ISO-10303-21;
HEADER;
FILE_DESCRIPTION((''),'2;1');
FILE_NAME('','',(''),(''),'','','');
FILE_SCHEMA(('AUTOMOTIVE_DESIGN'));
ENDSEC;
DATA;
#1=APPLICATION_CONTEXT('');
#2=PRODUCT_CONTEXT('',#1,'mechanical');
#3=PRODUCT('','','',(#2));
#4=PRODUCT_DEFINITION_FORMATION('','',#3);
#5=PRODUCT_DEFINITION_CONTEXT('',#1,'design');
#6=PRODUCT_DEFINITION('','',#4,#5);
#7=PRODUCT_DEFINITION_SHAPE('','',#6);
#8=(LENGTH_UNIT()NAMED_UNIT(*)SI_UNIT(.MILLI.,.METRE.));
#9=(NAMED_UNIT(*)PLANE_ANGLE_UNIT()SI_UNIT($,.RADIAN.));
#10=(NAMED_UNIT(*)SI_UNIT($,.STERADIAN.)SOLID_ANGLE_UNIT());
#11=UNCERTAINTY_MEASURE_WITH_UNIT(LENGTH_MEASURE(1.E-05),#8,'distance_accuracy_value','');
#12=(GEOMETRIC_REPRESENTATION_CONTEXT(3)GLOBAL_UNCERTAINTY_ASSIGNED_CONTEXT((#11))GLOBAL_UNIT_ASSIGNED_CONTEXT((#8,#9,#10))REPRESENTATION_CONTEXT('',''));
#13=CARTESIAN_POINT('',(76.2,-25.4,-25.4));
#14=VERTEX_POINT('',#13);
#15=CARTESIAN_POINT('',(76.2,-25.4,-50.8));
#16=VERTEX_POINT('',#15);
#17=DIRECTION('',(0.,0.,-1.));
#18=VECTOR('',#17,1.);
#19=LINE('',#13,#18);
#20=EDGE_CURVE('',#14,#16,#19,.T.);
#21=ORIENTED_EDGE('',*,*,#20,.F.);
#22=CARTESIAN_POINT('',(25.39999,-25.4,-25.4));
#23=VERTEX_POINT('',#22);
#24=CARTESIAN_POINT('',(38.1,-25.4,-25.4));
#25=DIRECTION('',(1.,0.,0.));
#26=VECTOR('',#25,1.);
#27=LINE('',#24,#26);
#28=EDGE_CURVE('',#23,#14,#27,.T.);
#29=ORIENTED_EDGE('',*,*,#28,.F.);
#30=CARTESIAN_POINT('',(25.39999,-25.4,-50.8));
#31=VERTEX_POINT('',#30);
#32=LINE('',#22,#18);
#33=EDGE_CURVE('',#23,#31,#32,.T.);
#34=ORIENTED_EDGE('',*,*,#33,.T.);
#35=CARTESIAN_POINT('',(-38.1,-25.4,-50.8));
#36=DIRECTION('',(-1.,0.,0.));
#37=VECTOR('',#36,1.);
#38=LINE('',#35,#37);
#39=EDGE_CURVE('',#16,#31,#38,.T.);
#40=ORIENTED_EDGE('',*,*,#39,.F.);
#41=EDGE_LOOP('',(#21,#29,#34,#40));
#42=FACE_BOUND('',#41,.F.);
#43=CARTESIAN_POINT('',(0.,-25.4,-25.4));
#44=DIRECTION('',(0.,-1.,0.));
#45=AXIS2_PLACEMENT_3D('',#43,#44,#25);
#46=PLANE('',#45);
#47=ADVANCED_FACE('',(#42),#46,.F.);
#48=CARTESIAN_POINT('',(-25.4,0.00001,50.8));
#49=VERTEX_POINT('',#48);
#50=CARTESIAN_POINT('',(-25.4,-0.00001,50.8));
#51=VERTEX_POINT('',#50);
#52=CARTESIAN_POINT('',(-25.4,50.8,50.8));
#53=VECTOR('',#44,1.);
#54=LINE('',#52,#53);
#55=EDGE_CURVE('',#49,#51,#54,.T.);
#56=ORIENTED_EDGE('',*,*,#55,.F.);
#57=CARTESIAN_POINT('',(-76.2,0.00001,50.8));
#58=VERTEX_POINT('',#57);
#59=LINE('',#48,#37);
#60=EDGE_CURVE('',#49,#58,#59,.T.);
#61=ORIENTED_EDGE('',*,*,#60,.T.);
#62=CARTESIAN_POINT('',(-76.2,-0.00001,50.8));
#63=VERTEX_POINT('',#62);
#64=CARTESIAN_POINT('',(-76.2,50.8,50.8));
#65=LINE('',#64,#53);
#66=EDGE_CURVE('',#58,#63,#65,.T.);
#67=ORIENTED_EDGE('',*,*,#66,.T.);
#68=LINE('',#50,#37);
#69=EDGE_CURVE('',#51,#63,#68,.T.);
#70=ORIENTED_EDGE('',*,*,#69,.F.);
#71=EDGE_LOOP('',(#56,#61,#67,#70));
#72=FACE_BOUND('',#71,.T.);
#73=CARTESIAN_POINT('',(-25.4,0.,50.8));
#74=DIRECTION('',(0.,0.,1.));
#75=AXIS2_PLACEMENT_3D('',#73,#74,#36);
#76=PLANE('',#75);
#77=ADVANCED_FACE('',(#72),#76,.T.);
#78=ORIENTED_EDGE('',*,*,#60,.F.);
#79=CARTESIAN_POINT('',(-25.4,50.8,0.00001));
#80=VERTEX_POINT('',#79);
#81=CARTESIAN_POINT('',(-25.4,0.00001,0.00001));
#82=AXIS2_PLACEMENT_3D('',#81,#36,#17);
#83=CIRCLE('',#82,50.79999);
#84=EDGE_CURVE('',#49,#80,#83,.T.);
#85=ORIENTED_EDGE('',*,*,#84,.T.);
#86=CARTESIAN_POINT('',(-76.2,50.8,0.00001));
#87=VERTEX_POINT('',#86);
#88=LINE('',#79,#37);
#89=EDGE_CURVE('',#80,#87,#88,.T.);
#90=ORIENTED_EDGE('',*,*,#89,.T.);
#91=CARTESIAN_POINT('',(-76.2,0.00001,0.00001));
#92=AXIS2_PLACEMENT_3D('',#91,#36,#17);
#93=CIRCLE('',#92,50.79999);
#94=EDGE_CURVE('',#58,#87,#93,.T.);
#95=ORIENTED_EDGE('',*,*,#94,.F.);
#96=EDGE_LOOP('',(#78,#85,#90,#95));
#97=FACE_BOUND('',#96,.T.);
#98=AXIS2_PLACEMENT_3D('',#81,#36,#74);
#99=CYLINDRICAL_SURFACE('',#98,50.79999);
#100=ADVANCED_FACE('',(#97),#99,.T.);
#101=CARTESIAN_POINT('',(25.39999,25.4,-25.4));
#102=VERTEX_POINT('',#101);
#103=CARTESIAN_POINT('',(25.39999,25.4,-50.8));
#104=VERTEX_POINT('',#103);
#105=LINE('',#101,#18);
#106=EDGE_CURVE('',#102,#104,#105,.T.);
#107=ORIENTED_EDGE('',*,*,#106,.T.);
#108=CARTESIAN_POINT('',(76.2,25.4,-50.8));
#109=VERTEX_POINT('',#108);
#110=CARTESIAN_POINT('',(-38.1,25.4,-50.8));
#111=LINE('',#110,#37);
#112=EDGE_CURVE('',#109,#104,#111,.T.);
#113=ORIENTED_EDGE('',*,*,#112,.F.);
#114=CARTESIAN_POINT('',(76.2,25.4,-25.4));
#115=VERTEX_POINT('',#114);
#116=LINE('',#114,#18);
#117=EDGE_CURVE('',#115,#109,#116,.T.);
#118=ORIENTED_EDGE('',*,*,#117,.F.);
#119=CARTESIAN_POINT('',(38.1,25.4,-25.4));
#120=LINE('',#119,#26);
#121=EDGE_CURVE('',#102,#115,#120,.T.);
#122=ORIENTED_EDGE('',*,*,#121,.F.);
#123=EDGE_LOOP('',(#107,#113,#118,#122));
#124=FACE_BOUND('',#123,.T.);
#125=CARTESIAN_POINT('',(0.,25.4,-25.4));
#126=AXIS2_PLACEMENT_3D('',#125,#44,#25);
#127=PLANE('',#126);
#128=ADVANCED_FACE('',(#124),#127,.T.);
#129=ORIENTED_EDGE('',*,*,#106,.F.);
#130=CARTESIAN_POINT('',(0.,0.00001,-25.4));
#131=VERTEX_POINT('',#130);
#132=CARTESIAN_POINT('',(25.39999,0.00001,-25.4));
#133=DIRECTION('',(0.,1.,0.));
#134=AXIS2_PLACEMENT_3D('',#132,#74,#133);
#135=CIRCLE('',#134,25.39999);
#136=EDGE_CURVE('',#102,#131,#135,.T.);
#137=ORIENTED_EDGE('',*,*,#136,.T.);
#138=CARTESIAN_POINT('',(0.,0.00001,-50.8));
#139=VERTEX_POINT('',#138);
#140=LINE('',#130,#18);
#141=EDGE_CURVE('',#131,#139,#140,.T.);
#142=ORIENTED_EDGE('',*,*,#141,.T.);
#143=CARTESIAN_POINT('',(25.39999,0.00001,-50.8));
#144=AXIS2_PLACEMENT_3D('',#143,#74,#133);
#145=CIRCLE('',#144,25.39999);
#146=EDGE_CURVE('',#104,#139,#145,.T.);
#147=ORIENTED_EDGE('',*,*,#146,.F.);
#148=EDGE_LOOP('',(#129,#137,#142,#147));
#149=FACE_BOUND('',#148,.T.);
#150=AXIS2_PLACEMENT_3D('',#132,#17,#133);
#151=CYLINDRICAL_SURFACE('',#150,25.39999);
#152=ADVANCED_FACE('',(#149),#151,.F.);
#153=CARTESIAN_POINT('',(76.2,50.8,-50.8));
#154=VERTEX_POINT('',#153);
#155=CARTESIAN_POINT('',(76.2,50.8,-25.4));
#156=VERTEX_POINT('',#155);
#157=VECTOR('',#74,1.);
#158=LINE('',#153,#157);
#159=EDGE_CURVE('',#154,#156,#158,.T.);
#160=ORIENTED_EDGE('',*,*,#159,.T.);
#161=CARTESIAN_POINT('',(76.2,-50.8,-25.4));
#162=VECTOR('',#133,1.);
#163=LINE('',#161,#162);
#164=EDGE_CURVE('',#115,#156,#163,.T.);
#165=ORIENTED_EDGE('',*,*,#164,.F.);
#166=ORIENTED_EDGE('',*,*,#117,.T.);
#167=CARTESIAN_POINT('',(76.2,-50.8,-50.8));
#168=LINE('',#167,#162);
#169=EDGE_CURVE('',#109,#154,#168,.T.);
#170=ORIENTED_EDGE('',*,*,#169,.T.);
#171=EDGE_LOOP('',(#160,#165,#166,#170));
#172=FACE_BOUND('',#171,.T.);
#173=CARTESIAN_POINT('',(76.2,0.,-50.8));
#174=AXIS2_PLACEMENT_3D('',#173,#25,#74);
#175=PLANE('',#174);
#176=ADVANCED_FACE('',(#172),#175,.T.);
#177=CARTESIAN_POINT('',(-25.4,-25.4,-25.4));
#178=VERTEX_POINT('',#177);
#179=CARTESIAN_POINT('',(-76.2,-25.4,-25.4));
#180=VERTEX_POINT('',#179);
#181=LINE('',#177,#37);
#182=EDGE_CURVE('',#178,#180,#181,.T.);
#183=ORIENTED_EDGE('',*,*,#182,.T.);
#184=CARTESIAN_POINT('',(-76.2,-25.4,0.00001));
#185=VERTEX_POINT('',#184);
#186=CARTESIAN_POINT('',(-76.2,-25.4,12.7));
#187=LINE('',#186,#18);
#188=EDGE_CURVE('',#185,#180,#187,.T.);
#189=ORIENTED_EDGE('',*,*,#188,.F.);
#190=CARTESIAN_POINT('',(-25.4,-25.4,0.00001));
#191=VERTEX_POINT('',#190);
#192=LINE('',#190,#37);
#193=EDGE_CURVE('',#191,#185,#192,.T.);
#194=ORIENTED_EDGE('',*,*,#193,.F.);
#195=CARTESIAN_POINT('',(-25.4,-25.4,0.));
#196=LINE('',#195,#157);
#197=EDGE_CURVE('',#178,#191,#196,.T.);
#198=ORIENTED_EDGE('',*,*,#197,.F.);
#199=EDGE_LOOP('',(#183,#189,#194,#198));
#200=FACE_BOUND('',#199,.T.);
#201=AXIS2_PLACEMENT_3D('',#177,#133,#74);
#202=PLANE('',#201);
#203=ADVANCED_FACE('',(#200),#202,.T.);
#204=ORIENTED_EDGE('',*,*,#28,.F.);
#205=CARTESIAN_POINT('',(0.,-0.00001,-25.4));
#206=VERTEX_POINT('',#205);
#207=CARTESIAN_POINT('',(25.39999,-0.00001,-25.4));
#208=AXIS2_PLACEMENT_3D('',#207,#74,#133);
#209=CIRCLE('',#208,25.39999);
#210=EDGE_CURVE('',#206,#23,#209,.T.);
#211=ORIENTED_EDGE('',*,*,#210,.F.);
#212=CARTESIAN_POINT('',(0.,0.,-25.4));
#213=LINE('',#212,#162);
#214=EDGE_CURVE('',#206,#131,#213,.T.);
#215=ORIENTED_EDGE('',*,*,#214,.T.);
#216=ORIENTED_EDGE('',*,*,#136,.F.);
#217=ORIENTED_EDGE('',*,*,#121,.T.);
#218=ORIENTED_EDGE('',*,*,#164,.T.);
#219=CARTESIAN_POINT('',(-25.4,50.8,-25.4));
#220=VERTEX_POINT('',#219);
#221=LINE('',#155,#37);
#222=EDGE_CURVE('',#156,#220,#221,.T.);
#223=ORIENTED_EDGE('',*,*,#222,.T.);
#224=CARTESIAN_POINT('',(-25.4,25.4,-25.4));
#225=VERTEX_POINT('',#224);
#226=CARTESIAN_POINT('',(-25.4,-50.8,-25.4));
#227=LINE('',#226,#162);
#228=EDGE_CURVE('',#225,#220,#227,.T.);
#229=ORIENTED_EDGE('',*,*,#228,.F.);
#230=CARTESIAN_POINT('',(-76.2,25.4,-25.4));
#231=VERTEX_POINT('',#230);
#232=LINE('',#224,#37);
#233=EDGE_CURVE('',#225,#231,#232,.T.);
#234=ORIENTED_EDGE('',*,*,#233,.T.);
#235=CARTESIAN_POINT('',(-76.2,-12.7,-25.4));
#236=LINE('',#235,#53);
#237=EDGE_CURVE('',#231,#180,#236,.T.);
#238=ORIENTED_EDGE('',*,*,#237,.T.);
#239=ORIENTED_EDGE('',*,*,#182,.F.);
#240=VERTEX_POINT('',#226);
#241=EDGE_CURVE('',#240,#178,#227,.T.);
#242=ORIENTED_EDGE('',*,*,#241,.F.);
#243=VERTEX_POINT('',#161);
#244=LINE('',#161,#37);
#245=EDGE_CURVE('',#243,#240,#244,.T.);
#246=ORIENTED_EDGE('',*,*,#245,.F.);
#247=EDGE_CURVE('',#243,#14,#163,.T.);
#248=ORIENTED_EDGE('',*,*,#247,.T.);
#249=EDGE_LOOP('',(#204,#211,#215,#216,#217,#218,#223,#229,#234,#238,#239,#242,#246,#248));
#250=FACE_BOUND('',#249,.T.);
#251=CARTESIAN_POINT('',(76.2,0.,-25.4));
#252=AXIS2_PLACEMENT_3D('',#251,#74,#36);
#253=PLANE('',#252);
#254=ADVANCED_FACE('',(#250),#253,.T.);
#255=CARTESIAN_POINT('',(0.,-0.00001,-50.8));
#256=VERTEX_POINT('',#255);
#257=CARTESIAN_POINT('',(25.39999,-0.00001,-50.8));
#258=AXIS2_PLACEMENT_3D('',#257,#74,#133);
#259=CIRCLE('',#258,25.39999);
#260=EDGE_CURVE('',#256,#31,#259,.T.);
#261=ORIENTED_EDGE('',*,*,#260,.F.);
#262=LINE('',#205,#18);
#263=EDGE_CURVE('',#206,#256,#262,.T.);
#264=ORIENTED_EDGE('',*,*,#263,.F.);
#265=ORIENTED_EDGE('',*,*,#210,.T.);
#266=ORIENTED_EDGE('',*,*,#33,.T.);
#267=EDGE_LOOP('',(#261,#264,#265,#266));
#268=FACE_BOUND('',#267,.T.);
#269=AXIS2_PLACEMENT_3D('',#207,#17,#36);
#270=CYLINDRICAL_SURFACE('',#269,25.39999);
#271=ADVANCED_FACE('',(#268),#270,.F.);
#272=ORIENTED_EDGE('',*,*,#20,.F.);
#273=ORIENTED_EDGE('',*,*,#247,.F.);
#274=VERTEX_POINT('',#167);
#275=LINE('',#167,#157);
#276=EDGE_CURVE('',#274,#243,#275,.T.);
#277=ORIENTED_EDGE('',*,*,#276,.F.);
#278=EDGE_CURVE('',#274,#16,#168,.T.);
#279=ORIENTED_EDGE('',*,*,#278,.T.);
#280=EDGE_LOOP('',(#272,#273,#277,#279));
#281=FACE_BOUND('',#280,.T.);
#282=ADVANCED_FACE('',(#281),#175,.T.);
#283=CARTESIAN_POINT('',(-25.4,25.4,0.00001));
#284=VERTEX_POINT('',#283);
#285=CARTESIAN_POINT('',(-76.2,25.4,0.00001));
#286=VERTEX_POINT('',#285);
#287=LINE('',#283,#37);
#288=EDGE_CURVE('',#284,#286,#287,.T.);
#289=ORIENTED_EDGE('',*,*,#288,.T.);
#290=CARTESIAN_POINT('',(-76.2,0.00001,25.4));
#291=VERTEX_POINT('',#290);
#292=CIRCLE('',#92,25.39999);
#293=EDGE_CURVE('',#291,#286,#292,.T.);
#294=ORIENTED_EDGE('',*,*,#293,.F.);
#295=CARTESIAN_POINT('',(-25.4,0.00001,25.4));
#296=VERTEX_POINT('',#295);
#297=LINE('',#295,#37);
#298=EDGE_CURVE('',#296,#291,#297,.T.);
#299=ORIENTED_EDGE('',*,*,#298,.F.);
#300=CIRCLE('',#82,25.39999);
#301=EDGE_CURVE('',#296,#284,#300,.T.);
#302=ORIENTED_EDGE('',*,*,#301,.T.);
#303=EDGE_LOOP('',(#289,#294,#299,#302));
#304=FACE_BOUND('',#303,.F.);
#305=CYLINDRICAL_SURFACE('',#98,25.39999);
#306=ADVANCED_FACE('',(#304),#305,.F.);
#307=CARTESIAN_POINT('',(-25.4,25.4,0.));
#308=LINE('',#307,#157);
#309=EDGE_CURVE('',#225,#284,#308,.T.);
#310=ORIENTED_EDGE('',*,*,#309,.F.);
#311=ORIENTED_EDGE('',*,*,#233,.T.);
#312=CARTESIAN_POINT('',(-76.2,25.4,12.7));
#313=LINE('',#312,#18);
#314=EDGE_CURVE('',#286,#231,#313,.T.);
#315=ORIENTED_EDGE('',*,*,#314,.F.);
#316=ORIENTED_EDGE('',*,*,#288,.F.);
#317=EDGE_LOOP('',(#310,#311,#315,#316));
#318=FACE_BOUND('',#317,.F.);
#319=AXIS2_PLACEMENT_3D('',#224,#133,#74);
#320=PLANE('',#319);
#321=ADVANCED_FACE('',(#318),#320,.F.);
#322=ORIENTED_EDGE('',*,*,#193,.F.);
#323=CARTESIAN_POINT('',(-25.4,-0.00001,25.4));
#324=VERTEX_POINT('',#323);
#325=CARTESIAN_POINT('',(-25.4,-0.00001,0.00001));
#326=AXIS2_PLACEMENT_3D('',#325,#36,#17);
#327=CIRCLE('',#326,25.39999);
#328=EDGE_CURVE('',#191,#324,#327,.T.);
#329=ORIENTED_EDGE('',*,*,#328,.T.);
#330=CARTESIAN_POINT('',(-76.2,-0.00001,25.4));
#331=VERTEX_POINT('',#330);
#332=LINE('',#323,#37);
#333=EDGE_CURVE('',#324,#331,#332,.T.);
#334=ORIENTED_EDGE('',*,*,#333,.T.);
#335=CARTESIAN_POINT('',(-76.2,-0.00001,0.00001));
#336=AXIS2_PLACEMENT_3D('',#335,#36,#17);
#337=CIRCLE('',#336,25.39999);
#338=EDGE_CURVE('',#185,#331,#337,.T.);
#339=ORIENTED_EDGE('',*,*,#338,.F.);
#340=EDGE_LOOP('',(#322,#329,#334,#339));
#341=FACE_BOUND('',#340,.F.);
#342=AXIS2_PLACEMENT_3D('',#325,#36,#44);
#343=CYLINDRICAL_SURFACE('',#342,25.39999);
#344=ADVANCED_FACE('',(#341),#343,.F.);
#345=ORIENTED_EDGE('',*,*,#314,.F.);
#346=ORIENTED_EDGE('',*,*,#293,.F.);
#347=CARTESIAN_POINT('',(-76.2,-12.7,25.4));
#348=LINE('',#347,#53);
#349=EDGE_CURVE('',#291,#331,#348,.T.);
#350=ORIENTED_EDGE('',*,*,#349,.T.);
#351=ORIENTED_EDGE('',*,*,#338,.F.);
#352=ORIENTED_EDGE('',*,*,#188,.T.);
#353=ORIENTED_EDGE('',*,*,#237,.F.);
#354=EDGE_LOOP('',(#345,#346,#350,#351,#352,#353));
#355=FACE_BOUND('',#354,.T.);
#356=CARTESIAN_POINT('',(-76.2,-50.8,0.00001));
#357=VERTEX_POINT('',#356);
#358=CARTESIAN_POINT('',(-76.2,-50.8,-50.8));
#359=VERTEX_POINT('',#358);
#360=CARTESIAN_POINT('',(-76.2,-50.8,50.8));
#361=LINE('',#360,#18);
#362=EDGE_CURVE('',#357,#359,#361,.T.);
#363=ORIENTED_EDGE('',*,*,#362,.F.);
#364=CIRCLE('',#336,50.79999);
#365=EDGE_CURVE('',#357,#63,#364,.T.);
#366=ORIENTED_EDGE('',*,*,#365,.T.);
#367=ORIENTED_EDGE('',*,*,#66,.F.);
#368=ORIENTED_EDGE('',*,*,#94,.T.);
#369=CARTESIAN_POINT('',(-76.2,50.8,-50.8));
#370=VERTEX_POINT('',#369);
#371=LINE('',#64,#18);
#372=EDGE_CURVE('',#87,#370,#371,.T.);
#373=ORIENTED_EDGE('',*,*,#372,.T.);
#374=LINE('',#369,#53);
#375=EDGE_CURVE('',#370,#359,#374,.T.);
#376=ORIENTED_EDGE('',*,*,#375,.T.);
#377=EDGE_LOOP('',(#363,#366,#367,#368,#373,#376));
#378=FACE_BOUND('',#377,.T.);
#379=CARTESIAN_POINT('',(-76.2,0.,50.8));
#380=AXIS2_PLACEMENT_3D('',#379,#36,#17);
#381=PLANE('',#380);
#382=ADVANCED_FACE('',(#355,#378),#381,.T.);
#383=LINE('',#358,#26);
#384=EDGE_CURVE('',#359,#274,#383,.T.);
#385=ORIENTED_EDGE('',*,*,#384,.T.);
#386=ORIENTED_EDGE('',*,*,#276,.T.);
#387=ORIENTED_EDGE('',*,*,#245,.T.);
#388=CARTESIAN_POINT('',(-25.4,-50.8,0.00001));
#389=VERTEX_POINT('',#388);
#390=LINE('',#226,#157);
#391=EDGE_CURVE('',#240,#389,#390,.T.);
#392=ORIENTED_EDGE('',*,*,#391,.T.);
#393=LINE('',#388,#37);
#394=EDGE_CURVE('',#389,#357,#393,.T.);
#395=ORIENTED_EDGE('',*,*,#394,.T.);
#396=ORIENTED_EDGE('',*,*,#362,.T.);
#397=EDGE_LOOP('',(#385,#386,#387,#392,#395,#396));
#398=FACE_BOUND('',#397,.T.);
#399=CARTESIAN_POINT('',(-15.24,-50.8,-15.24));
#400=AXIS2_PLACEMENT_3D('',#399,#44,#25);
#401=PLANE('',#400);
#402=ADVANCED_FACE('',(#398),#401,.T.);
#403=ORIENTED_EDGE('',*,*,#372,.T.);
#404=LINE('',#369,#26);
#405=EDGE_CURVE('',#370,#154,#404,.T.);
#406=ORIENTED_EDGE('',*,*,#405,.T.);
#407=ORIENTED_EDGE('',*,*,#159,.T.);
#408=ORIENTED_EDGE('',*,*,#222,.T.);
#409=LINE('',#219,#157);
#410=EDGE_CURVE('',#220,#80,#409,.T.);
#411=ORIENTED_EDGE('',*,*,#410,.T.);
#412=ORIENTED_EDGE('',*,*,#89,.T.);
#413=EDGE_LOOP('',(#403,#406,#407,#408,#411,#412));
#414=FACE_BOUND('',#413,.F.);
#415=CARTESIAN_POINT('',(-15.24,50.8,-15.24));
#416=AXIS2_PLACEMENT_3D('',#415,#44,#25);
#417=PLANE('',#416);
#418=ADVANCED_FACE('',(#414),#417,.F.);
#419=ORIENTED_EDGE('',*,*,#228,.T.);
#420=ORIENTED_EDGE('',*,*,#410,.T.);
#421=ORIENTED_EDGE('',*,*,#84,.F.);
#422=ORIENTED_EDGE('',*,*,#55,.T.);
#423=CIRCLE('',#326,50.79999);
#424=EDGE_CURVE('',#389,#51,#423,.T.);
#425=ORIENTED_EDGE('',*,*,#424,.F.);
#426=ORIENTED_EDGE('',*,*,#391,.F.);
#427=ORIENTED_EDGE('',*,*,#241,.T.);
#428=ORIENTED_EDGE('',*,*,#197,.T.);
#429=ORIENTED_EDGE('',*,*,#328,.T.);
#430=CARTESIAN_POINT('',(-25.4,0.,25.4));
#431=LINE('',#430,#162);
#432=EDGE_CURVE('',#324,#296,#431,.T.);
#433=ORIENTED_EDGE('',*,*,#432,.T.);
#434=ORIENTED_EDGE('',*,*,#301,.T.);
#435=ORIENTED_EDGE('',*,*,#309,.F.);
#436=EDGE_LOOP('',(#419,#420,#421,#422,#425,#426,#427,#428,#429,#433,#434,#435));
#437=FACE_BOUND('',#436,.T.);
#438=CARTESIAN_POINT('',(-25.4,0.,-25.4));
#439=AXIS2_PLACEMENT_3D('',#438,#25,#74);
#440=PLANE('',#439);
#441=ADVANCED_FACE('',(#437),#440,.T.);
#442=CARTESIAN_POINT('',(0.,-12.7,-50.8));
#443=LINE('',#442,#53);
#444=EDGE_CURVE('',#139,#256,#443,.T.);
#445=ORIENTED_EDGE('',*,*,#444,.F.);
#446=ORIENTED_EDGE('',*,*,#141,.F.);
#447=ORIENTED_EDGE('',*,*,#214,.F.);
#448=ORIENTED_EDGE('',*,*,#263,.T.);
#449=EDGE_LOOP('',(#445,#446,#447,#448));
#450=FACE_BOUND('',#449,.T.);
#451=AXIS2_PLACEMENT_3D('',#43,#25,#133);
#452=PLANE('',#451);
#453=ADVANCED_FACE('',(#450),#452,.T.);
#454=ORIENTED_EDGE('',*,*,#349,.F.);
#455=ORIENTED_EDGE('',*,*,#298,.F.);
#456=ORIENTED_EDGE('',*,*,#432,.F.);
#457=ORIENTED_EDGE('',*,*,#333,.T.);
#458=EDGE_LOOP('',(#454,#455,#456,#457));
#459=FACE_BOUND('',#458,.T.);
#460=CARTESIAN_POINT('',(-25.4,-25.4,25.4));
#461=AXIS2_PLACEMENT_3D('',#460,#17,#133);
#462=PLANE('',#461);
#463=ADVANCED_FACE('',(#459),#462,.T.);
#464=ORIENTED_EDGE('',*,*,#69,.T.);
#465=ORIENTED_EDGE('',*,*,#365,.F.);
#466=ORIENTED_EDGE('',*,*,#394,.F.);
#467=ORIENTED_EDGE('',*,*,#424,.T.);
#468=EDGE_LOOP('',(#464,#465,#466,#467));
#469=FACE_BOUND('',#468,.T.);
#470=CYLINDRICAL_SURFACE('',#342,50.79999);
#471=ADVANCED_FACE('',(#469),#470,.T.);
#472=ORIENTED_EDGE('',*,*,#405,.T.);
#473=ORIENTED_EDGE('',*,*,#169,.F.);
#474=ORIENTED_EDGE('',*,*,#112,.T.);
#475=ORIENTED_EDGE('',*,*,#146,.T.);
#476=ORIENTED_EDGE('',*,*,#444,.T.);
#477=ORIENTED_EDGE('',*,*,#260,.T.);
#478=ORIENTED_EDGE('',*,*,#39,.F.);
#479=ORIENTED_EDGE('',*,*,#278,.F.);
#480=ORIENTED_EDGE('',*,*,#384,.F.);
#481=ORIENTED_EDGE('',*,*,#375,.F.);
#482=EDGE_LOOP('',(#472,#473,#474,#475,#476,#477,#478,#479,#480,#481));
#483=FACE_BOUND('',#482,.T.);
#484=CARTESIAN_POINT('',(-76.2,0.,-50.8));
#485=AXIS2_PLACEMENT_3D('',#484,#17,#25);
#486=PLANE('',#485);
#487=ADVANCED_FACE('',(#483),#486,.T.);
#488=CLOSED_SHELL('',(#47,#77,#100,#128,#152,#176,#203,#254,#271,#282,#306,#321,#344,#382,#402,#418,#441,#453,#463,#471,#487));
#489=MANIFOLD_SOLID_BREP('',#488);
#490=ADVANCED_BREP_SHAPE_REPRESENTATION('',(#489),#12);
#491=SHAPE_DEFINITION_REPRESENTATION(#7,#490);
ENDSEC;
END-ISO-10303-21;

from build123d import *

# Parameters (mm, degrees)
F1_DEPTH = 50.8
F2_W     = 50.8
F2_H     = 50.8
F3_DEPTH = 204.4911384583
F4_W     = 76.2
F4_H     = 50.8
F5_DEPTH = 61.3817144185
F6_R     = 50.79999
F7_R     = 25.39999
F8_R     = 25.39999


# Not quite as in the source:
# - a fillet or chamfer is up to 0.001 mm smaller than in the source, because OpenCascade refuses the exact size


with BuildPart() as f1:
    # F0 (on Front) → F1 (new body, symmetric)
    with BuildSketch(Plane.XZ):
        Polygon((-25.4, -25.4), (-25.4, 50.8), (-76.2, 50.8), (-76.2, -50.8), (76.2, -50.8), (76.2, -25.4), align=None)
    extrude(amount=F1_DEPTH, both=True)

    # F2 (on face) → F3 (cut)
    with BuildSketch(Plane.YZ.offset(-25.4)):
        Rectangle(F2_W, F2_H)
    extrude(amount=-F3_DEPTH, mode=Mode.SUBTRACT)

    # F4 (on face) → F5 (cut)
    with BuildSketch(Plane.XY.offset(-25.4)):
        with Locations((38.1, 0)):
            Rectangle(F4_W, F4_H)
    extrude(amount=-F5_DEPTH, mode=Mode.SUBTRACT)

    # F6 (radius 50.8 in the source; OpenCascade refuses exactly that, so slightly less here)
    f6_edges = [f1.edges().sort_by_distance(p)[0] for p in [
        (-50.8, -50.8, 50.8),
        (-50.8, 50.8, 50.8),
    ]]
    fillet(f6_edges, radius=F6_R)

    # F7 (radius 25.4 in the source; OpenCascade refuses exactly that, so slightly less here)
    f7_edges = [f1.edges().sort_by_distance(p)[0] for p in [
        (-50.8, -25.4, 25.4),
        (-50.8, 25.4, 25.4),
    ]]
    fillet(f7_edges, radius=F7_R)

    # F8 (radius 25.4 in the source; OpenCascade refuses exactly that, so slightly less here)
    f8_edges = [f1.edges().sort_by_distance(p)[0] for p in [
        (0, -25.4, -38.1),
        (0, 25.4, -38.1),
    ]]
    fillet(f8_edges, radius=F8_R)


solid = f1.part
